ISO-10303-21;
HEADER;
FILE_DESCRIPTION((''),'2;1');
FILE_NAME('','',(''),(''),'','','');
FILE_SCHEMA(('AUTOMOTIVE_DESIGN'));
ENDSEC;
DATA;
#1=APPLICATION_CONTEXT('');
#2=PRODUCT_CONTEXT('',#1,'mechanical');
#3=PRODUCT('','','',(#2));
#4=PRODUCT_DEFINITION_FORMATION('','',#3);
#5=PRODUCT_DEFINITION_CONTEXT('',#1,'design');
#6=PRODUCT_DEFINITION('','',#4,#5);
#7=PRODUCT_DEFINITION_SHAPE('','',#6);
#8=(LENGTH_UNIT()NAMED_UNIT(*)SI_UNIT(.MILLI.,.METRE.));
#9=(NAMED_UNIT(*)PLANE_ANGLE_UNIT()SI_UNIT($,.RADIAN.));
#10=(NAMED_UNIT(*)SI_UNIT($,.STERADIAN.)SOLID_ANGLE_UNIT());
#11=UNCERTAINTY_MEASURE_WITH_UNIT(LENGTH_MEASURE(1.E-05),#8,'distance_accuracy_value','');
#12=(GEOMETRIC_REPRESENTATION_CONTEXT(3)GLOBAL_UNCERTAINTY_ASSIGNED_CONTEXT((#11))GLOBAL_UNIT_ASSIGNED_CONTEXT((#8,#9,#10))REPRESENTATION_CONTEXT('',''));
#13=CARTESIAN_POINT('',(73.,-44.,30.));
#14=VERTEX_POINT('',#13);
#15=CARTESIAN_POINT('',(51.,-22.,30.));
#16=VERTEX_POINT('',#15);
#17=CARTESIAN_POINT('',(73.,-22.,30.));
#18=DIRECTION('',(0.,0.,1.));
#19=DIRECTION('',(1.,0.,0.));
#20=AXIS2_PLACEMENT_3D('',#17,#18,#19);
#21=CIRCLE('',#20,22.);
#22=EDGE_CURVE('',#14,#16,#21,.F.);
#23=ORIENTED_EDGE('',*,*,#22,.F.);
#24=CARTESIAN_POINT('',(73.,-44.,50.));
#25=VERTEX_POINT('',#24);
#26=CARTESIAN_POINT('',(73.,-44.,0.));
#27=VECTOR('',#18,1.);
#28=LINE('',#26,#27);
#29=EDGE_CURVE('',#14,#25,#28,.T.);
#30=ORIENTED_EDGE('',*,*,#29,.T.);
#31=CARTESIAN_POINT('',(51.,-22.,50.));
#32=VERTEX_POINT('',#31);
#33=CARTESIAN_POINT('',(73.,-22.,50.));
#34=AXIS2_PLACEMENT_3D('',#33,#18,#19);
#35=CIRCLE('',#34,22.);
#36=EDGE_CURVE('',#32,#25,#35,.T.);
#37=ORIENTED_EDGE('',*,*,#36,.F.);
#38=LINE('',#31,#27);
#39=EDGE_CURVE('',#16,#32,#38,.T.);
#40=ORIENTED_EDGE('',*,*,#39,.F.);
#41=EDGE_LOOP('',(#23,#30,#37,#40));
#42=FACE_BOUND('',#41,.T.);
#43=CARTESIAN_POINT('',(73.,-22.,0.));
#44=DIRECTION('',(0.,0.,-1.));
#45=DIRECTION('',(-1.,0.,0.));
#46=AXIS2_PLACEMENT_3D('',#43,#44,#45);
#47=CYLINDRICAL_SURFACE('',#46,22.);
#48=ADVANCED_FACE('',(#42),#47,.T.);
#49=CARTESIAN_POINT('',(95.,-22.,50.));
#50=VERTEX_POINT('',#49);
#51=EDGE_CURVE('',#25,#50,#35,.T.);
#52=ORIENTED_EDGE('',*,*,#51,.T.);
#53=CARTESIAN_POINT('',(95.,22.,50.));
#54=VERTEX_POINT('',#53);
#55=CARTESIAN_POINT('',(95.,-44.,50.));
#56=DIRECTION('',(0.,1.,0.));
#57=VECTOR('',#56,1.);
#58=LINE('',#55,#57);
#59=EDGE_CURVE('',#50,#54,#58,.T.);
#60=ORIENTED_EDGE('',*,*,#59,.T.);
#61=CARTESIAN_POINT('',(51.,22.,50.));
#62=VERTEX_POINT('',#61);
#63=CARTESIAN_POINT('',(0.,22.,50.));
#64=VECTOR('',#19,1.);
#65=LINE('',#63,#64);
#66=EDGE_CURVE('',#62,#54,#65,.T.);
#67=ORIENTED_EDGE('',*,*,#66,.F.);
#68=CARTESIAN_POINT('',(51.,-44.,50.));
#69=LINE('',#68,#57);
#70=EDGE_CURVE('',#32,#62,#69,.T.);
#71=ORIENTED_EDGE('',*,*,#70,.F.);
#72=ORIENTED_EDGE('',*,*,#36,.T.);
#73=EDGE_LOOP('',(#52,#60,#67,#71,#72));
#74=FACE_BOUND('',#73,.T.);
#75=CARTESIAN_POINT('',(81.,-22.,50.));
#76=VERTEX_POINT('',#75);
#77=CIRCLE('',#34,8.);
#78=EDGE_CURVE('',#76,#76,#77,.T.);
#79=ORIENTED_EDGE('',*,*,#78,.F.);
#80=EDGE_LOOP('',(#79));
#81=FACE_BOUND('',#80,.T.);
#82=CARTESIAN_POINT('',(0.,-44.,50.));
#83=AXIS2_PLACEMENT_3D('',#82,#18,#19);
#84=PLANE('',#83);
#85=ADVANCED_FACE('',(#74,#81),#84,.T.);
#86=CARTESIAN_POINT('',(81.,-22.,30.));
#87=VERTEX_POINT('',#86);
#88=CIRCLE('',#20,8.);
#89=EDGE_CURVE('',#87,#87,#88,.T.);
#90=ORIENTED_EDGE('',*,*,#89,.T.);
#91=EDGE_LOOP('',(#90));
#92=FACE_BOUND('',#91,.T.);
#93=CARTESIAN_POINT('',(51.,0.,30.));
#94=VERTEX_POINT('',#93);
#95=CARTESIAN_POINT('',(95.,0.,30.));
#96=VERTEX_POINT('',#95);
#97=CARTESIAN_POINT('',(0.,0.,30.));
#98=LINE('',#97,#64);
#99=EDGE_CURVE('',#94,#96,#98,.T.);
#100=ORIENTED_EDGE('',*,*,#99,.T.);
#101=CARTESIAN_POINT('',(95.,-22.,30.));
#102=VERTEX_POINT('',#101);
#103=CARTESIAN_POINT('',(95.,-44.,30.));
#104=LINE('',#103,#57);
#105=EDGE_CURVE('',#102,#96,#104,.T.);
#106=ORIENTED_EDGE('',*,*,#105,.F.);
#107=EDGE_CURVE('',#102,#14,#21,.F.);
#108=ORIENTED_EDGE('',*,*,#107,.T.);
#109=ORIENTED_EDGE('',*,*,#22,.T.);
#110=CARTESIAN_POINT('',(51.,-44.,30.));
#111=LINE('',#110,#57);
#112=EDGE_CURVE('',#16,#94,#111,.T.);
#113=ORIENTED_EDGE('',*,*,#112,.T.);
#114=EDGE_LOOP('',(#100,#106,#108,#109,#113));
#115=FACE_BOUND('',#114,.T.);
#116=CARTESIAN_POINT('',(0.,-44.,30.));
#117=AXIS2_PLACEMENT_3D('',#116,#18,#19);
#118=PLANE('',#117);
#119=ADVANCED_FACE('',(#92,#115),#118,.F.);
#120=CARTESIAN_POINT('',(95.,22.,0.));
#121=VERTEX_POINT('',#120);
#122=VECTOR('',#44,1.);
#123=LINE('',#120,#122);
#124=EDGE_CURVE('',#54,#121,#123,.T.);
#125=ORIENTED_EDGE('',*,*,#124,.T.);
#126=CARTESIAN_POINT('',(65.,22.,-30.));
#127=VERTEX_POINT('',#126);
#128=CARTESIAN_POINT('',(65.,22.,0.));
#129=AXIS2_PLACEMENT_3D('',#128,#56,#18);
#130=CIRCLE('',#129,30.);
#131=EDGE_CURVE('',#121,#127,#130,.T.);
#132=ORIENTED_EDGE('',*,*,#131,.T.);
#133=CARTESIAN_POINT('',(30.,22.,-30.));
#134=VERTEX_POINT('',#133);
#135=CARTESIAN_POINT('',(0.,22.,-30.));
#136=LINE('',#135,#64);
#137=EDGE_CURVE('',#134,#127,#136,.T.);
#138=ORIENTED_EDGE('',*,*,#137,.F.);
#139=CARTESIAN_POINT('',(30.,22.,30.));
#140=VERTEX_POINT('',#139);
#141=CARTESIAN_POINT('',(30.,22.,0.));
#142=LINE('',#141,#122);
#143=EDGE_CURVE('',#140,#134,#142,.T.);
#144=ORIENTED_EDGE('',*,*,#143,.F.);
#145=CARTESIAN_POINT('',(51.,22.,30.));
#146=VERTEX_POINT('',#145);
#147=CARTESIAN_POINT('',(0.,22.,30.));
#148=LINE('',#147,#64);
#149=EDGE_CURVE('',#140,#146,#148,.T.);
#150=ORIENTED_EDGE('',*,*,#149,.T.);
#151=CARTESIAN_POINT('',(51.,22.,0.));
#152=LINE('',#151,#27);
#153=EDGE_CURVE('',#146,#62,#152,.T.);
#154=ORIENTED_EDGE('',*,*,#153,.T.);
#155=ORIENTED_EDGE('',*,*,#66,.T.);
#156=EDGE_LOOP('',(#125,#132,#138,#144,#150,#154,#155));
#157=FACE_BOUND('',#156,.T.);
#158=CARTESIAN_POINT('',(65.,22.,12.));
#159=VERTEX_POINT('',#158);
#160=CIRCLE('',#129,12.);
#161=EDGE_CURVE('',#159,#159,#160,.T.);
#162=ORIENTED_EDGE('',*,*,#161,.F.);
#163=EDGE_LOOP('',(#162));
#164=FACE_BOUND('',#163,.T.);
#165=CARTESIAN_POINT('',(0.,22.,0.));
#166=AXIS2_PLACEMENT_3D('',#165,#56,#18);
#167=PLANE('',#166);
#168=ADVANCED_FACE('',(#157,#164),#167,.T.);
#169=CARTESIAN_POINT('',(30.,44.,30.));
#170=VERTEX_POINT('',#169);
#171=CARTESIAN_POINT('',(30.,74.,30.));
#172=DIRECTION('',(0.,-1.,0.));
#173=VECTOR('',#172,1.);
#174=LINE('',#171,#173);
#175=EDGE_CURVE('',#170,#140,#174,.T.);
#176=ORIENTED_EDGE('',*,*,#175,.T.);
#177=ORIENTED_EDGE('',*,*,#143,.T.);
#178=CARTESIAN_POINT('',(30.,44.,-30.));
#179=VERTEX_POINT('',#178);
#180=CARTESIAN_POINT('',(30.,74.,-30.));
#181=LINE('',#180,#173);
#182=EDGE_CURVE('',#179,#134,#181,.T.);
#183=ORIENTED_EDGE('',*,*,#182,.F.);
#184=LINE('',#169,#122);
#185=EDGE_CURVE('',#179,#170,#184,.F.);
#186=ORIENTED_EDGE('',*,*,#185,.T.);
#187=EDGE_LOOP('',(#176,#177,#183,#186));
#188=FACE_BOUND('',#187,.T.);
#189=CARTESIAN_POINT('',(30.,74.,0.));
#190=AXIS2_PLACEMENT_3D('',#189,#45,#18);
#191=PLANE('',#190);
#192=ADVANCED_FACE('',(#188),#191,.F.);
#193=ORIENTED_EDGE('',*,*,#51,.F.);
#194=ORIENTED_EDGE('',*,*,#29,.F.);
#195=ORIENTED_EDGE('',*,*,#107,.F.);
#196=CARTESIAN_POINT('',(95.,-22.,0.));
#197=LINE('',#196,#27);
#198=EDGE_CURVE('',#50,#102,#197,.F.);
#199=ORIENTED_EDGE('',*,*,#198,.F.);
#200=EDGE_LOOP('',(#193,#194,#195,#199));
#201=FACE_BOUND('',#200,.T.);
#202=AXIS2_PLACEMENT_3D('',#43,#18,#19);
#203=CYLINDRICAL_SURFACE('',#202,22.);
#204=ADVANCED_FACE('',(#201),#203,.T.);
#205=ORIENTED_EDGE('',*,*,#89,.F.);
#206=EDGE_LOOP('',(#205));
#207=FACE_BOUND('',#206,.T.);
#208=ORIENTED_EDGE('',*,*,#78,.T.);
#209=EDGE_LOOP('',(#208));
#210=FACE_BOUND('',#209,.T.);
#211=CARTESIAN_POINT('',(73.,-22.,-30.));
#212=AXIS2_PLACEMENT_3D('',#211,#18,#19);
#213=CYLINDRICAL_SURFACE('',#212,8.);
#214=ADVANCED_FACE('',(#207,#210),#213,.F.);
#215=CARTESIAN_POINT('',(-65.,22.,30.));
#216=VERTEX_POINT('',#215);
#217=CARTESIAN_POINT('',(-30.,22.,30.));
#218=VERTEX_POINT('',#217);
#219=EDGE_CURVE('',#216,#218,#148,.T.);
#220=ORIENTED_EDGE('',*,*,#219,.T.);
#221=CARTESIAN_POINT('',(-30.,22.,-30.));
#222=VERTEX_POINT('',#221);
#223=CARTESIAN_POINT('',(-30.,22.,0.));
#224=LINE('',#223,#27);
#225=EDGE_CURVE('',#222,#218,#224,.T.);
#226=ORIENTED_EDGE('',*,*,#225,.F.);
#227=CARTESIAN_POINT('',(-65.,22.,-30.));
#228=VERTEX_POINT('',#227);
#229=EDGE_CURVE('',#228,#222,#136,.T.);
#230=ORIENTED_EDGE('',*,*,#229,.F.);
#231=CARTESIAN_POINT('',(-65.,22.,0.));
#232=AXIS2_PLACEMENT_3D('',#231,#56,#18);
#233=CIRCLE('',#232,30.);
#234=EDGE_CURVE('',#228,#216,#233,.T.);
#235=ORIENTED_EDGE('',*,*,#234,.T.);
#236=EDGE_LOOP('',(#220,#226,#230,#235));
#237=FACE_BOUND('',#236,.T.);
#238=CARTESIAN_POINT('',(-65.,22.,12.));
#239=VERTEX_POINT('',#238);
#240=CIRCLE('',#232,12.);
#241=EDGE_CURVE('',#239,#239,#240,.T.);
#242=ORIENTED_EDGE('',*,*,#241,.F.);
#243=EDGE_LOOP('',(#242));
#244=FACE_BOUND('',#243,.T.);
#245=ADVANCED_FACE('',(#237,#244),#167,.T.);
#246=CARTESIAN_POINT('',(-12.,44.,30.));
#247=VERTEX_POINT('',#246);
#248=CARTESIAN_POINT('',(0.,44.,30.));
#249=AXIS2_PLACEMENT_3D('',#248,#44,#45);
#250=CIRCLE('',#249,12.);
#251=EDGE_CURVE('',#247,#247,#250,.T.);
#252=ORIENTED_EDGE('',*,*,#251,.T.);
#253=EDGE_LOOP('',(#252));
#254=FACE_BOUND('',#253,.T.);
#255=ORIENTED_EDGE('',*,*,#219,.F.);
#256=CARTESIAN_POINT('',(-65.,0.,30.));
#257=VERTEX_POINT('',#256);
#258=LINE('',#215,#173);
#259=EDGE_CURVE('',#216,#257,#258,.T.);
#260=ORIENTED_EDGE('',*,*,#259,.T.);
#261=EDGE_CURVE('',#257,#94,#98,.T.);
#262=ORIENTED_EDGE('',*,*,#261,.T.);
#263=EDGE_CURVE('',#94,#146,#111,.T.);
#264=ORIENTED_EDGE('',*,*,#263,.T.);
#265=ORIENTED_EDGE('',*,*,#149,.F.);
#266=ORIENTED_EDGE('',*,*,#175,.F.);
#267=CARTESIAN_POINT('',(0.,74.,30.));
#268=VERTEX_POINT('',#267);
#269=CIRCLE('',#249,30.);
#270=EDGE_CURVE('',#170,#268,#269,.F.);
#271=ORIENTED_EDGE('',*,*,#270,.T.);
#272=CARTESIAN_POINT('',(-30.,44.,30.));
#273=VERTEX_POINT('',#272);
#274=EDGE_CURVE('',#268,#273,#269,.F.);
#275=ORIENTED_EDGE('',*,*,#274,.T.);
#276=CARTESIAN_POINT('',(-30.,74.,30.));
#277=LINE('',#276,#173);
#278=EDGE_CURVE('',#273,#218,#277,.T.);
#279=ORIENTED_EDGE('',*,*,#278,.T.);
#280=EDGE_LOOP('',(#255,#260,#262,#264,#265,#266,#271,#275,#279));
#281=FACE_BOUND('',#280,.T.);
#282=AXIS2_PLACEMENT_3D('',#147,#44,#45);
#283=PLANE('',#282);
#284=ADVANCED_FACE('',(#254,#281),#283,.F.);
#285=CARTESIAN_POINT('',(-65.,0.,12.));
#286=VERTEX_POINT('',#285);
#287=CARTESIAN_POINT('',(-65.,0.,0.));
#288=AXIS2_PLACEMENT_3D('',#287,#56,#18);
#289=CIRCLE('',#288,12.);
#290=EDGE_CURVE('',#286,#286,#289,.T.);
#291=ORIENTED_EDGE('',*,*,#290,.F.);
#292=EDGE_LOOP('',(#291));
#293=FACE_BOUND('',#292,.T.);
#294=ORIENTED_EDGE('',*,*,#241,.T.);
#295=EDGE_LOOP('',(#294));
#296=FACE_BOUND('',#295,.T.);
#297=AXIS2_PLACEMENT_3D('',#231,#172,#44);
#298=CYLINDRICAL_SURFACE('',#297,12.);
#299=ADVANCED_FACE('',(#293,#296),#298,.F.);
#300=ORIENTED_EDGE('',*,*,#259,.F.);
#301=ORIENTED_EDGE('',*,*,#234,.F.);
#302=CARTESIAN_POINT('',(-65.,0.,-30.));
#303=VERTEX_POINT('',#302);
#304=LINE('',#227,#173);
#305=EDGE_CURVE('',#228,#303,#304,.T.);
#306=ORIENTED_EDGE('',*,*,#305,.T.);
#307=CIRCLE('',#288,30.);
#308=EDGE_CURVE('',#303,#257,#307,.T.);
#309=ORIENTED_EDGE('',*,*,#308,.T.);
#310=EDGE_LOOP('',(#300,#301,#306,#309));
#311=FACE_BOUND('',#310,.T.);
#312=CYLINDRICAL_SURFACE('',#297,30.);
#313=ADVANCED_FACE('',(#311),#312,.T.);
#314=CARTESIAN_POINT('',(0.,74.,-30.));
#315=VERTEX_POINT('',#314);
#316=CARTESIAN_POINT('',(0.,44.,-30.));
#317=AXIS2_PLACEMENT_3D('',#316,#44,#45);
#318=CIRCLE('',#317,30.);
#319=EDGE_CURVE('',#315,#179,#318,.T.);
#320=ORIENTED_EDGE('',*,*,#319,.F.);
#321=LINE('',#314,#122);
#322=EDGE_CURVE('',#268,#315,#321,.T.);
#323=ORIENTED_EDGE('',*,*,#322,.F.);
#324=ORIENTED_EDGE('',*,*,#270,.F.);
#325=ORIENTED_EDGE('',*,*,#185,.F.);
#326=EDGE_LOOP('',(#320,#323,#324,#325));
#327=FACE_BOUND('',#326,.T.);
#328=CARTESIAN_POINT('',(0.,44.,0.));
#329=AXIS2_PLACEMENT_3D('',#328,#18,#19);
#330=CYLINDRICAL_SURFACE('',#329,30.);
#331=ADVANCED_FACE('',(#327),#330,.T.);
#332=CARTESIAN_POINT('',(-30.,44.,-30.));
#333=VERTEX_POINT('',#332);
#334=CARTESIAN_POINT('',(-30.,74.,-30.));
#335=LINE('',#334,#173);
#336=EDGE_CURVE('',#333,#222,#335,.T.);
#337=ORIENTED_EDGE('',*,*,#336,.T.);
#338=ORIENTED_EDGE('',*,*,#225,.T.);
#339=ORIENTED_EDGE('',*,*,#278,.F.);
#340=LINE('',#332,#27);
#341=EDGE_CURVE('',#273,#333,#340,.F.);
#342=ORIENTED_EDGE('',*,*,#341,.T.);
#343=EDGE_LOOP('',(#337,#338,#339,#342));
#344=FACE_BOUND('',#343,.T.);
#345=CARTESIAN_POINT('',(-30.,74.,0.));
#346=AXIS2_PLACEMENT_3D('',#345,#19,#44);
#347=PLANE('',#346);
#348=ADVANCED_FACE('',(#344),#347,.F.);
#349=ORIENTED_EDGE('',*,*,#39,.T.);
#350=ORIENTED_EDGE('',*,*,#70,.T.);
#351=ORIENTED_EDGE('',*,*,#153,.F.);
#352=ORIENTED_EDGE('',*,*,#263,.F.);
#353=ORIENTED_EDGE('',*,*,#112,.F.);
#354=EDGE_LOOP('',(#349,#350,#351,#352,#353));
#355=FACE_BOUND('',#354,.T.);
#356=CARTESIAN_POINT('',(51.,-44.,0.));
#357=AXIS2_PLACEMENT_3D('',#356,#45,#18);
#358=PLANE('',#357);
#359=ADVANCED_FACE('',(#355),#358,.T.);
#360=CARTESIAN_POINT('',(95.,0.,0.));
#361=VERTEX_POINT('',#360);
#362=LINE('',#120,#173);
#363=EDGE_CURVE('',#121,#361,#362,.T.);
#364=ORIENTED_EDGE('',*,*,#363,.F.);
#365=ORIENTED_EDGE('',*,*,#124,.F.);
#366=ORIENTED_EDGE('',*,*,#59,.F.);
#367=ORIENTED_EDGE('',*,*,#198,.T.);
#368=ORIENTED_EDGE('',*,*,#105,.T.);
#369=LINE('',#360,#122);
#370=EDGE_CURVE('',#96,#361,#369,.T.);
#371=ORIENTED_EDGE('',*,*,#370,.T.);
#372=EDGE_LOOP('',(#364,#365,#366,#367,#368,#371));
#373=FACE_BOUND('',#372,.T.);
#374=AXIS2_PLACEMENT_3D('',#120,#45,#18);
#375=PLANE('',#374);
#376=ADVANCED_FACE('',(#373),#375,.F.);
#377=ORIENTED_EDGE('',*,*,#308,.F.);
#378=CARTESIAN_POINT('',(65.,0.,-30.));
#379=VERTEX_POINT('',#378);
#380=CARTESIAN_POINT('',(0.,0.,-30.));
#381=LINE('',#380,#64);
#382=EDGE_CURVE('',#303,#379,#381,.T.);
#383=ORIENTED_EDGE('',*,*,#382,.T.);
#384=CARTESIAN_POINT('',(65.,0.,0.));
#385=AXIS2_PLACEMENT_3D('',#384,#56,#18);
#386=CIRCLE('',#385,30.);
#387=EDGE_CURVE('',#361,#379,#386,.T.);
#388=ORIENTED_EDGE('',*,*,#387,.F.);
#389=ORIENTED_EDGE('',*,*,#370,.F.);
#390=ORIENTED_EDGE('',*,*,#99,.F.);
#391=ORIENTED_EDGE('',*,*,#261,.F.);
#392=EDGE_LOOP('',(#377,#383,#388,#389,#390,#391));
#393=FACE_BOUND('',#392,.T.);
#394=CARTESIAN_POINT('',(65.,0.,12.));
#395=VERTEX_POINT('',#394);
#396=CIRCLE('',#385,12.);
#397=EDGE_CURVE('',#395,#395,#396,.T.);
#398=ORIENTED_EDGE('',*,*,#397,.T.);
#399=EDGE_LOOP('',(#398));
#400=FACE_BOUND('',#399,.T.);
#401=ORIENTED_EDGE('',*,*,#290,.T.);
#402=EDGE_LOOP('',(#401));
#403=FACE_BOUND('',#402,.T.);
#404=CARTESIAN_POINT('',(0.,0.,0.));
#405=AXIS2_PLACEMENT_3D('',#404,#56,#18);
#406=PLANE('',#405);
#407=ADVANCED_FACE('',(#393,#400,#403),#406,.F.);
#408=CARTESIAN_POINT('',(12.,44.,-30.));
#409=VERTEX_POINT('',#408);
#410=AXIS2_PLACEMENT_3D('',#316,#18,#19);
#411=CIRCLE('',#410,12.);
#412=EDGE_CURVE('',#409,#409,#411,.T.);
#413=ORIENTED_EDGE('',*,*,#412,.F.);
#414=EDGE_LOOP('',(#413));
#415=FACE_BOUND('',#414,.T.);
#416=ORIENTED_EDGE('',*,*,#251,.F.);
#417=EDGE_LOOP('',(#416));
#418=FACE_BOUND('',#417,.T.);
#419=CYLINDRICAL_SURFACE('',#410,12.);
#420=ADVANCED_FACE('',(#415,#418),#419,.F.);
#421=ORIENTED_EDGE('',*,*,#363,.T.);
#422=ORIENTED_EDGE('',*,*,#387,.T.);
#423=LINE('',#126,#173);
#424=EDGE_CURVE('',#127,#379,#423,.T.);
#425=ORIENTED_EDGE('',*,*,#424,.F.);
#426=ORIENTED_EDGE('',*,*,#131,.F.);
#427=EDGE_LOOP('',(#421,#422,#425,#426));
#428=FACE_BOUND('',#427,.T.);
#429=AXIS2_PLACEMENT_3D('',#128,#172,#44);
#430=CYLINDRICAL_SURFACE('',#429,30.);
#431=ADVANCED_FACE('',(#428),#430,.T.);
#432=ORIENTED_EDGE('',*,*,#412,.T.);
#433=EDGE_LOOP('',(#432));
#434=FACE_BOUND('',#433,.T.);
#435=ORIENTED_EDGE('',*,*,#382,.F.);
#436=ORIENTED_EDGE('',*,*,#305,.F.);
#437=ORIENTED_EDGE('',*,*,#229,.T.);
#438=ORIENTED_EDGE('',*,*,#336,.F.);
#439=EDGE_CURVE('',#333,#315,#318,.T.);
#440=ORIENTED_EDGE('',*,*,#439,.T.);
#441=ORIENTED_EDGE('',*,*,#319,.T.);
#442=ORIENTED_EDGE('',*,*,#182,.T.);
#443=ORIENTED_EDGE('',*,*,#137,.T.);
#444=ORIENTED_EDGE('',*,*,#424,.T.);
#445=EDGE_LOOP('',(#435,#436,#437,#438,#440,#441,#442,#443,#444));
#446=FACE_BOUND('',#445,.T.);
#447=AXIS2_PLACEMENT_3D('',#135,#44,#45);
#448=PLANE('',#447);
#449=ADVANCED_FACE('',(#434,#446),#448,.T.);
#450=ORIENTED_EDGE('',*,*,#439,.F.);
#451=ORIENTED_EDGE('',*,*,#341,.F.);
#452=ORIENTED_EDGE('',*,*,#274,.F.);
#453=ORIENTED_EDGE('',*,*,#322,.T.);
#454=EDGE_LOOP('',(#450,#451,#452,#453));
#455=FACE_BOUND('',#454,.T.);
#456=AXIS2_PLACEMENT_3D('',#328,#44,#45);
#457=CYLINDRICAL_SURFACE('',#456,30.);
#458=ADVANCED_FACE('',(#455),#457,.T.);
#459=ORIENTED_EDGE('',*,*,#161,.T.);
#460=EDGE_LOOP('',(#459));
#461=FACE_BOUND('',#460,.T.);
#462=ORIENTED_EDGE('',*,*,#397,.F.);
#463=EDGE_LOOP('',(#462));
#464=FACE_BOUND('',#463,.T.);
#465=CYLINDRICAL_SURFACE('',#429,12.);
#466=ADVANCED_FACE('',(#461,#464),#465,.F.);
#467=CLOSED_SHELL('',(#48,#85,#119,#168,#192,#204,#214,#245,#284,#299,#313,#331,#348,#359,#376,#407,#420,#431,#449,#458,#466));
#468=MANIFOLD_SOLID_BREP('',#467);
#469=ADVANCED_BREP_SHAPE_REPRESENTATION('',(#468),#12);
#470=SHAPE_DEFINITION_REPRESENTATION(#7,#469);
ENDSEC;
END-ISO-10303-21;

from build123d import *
from OCP.BRepFilletAPI import BRepFilletAPI_MakeFillet

# Parameters (mm, degrees)
SKETCH1_R                = 12
BOSS_EXTRUDE1_DEPTH      = 22
BOSS_EXTRUDE1_2_DEPTH    = 22
SKETCH1_3_W              = 60
SKETCH1_3_H              = 60
BOSS_EXTRUDE2_DEPTH      = 74
BOSS_EXTRUDE3_DEPTH      = 22
BOSS_EXTRUDE3_DEPTH_BACK = 44
SKETCH1_4_W              = 44
SKETCH1_4_H              = 20
FILLET1_R                = 30
FILLET1_R_2              = 22
CUT_EXTRUDE1_DEPTH       = 131.387882873
CUT_EXTRUDE1_DEPTH_BACK  = 131.387882873
SKETCH2_R                = 12
SKETCH2_R_2              = 8


with BuildPart() as part:
    # Sketch1 → Boss-Extrude1 (new body)
    with BuildSketch(Plane(origin=(0, 0, 0), x_dir=(1, 0, 0), z_dir=(0, 1, 0))):
        with BuildLine():
            Line((-65, -30), (-30, -30))
            Line((-30, -30), (-30, 30))
            Line((-30, 30), (-65, 30))
            ThreePointArc((-65, 30), (-95, 0), (-65, -30))
        make_face()
        with Locations(Location((-65, 0, 0), (0, 0, 270))):
            Circle(SKETCH1_R, mode=Mode.SUBTRACT)
    extrude(amount=BOSS_EXTRUDE1_DEPTH)



with BuildPart() as body_2:
    # Sketch1 → Boss-Extrude1 2 (new body)
    with BuildSketch(Plane(origin=(0, 0, 0), x_dir=(1, 0, 0), z_dir=(0, 1, 0))):
        with BuildLine():
            Line((51, -30), (95, -30))
            Line((95, -30), (95, 0))
            ThreePointArc((95, 0), (86.213203436, 21.213203436), (65, 30))
            Line((65, 30), (30, 30))
            Line((30, 30), (30, -30))
            Line((30, -30), (51, -30))
        make_face()
        with Locations(Location((65, 0, 0), (0, 0, 270))):
            Circle(SKETCH1_R, mode=Mode.SUBTRACT)
    extrude(amount=BOSS_EXTRUDE1_2_DEPTH)


with BuildPart() as part_1:
    add(part.part)

    add(body_2.part)  # Boss-Extrude2 merges body 2
    # Sketch1<3> → Boss-Extrude2 (add)
    with BuildSketch(Plane(origin=(0, 0, 0), x_dir=(1, 0, 0), z_dir=(0, 1, 0))):
        Rectangle(SKETCH1_3_W, SKETCH1_3_H)
    extrude(amount=BOSS_EXTRUDE2_DEPTH)

    # Sketch1<4> → Boss-Extrude3 (add, two sides: drawn at the far end of the back side and taken through both)
    with BuildSketch(Plane(origin=(0, 0, 0), x_dir=(1, 0, 0), z_dir=(0, 1, 0)).offset(-BOSS_EXTRUDE3_DEPTH_BACK)):
        with Locations((73, -40)):
            Rectangle(SKETCH1_4_W, SKETCH1_4_H)
    extrude(amount=BOSS_EXTRUDE3_DEPTH + BOSS_EXTRUDE3_DEPTH_BACK)

    # Fillet1
    fillet1_edges_1 = [part_1.edges().sort_by_distance(p)[0] for p in [
        (30, 74, 0),
        (-30, 74, 0),
    ]]
    fillet1_edges_2 = [part_1.edges().sort_by_distance(p)[0] for p in [
        (95, -44, 40),
        (51, -44, 40),
    ]]
    fillet1 = BRepFilletAPI_MakeFillet(part_1.part.solid().wrapped)
    for e in fillet1_edges_1:
        fillet1.Add(FILLET1_R - 0.0001, e.wrapped)
    for e in fillet1_edges_2:
        fillet1.Add(FILLET1_R_2 - 0.0001, e.wrapped)
    add(Compound.cast(fillet1.Shape()), mode=Mode.REPLACE)  # a hair under: the kernel refuses the full size

    # Sketch2 → Cut-Extrude1 (cut, two sides: drawn at the far end of the back side and taken through both)
    with BuildSketch(Plane.XY.offset(-CUT_EXTRUDE1_DEPTH_BACK)):
        with Locations((0, 44)):
            Circle(SKETCH2_R)
        with Locations((73, -22)):
            Circle(SKETCH2_R_2)
    extrude(amount=CUT_EXTRUDE1_DEPTH + CUT_EXTRUDE1_DEPTH_BACK, mode=Mode.SUBTRACT)


solid = part_1.part
